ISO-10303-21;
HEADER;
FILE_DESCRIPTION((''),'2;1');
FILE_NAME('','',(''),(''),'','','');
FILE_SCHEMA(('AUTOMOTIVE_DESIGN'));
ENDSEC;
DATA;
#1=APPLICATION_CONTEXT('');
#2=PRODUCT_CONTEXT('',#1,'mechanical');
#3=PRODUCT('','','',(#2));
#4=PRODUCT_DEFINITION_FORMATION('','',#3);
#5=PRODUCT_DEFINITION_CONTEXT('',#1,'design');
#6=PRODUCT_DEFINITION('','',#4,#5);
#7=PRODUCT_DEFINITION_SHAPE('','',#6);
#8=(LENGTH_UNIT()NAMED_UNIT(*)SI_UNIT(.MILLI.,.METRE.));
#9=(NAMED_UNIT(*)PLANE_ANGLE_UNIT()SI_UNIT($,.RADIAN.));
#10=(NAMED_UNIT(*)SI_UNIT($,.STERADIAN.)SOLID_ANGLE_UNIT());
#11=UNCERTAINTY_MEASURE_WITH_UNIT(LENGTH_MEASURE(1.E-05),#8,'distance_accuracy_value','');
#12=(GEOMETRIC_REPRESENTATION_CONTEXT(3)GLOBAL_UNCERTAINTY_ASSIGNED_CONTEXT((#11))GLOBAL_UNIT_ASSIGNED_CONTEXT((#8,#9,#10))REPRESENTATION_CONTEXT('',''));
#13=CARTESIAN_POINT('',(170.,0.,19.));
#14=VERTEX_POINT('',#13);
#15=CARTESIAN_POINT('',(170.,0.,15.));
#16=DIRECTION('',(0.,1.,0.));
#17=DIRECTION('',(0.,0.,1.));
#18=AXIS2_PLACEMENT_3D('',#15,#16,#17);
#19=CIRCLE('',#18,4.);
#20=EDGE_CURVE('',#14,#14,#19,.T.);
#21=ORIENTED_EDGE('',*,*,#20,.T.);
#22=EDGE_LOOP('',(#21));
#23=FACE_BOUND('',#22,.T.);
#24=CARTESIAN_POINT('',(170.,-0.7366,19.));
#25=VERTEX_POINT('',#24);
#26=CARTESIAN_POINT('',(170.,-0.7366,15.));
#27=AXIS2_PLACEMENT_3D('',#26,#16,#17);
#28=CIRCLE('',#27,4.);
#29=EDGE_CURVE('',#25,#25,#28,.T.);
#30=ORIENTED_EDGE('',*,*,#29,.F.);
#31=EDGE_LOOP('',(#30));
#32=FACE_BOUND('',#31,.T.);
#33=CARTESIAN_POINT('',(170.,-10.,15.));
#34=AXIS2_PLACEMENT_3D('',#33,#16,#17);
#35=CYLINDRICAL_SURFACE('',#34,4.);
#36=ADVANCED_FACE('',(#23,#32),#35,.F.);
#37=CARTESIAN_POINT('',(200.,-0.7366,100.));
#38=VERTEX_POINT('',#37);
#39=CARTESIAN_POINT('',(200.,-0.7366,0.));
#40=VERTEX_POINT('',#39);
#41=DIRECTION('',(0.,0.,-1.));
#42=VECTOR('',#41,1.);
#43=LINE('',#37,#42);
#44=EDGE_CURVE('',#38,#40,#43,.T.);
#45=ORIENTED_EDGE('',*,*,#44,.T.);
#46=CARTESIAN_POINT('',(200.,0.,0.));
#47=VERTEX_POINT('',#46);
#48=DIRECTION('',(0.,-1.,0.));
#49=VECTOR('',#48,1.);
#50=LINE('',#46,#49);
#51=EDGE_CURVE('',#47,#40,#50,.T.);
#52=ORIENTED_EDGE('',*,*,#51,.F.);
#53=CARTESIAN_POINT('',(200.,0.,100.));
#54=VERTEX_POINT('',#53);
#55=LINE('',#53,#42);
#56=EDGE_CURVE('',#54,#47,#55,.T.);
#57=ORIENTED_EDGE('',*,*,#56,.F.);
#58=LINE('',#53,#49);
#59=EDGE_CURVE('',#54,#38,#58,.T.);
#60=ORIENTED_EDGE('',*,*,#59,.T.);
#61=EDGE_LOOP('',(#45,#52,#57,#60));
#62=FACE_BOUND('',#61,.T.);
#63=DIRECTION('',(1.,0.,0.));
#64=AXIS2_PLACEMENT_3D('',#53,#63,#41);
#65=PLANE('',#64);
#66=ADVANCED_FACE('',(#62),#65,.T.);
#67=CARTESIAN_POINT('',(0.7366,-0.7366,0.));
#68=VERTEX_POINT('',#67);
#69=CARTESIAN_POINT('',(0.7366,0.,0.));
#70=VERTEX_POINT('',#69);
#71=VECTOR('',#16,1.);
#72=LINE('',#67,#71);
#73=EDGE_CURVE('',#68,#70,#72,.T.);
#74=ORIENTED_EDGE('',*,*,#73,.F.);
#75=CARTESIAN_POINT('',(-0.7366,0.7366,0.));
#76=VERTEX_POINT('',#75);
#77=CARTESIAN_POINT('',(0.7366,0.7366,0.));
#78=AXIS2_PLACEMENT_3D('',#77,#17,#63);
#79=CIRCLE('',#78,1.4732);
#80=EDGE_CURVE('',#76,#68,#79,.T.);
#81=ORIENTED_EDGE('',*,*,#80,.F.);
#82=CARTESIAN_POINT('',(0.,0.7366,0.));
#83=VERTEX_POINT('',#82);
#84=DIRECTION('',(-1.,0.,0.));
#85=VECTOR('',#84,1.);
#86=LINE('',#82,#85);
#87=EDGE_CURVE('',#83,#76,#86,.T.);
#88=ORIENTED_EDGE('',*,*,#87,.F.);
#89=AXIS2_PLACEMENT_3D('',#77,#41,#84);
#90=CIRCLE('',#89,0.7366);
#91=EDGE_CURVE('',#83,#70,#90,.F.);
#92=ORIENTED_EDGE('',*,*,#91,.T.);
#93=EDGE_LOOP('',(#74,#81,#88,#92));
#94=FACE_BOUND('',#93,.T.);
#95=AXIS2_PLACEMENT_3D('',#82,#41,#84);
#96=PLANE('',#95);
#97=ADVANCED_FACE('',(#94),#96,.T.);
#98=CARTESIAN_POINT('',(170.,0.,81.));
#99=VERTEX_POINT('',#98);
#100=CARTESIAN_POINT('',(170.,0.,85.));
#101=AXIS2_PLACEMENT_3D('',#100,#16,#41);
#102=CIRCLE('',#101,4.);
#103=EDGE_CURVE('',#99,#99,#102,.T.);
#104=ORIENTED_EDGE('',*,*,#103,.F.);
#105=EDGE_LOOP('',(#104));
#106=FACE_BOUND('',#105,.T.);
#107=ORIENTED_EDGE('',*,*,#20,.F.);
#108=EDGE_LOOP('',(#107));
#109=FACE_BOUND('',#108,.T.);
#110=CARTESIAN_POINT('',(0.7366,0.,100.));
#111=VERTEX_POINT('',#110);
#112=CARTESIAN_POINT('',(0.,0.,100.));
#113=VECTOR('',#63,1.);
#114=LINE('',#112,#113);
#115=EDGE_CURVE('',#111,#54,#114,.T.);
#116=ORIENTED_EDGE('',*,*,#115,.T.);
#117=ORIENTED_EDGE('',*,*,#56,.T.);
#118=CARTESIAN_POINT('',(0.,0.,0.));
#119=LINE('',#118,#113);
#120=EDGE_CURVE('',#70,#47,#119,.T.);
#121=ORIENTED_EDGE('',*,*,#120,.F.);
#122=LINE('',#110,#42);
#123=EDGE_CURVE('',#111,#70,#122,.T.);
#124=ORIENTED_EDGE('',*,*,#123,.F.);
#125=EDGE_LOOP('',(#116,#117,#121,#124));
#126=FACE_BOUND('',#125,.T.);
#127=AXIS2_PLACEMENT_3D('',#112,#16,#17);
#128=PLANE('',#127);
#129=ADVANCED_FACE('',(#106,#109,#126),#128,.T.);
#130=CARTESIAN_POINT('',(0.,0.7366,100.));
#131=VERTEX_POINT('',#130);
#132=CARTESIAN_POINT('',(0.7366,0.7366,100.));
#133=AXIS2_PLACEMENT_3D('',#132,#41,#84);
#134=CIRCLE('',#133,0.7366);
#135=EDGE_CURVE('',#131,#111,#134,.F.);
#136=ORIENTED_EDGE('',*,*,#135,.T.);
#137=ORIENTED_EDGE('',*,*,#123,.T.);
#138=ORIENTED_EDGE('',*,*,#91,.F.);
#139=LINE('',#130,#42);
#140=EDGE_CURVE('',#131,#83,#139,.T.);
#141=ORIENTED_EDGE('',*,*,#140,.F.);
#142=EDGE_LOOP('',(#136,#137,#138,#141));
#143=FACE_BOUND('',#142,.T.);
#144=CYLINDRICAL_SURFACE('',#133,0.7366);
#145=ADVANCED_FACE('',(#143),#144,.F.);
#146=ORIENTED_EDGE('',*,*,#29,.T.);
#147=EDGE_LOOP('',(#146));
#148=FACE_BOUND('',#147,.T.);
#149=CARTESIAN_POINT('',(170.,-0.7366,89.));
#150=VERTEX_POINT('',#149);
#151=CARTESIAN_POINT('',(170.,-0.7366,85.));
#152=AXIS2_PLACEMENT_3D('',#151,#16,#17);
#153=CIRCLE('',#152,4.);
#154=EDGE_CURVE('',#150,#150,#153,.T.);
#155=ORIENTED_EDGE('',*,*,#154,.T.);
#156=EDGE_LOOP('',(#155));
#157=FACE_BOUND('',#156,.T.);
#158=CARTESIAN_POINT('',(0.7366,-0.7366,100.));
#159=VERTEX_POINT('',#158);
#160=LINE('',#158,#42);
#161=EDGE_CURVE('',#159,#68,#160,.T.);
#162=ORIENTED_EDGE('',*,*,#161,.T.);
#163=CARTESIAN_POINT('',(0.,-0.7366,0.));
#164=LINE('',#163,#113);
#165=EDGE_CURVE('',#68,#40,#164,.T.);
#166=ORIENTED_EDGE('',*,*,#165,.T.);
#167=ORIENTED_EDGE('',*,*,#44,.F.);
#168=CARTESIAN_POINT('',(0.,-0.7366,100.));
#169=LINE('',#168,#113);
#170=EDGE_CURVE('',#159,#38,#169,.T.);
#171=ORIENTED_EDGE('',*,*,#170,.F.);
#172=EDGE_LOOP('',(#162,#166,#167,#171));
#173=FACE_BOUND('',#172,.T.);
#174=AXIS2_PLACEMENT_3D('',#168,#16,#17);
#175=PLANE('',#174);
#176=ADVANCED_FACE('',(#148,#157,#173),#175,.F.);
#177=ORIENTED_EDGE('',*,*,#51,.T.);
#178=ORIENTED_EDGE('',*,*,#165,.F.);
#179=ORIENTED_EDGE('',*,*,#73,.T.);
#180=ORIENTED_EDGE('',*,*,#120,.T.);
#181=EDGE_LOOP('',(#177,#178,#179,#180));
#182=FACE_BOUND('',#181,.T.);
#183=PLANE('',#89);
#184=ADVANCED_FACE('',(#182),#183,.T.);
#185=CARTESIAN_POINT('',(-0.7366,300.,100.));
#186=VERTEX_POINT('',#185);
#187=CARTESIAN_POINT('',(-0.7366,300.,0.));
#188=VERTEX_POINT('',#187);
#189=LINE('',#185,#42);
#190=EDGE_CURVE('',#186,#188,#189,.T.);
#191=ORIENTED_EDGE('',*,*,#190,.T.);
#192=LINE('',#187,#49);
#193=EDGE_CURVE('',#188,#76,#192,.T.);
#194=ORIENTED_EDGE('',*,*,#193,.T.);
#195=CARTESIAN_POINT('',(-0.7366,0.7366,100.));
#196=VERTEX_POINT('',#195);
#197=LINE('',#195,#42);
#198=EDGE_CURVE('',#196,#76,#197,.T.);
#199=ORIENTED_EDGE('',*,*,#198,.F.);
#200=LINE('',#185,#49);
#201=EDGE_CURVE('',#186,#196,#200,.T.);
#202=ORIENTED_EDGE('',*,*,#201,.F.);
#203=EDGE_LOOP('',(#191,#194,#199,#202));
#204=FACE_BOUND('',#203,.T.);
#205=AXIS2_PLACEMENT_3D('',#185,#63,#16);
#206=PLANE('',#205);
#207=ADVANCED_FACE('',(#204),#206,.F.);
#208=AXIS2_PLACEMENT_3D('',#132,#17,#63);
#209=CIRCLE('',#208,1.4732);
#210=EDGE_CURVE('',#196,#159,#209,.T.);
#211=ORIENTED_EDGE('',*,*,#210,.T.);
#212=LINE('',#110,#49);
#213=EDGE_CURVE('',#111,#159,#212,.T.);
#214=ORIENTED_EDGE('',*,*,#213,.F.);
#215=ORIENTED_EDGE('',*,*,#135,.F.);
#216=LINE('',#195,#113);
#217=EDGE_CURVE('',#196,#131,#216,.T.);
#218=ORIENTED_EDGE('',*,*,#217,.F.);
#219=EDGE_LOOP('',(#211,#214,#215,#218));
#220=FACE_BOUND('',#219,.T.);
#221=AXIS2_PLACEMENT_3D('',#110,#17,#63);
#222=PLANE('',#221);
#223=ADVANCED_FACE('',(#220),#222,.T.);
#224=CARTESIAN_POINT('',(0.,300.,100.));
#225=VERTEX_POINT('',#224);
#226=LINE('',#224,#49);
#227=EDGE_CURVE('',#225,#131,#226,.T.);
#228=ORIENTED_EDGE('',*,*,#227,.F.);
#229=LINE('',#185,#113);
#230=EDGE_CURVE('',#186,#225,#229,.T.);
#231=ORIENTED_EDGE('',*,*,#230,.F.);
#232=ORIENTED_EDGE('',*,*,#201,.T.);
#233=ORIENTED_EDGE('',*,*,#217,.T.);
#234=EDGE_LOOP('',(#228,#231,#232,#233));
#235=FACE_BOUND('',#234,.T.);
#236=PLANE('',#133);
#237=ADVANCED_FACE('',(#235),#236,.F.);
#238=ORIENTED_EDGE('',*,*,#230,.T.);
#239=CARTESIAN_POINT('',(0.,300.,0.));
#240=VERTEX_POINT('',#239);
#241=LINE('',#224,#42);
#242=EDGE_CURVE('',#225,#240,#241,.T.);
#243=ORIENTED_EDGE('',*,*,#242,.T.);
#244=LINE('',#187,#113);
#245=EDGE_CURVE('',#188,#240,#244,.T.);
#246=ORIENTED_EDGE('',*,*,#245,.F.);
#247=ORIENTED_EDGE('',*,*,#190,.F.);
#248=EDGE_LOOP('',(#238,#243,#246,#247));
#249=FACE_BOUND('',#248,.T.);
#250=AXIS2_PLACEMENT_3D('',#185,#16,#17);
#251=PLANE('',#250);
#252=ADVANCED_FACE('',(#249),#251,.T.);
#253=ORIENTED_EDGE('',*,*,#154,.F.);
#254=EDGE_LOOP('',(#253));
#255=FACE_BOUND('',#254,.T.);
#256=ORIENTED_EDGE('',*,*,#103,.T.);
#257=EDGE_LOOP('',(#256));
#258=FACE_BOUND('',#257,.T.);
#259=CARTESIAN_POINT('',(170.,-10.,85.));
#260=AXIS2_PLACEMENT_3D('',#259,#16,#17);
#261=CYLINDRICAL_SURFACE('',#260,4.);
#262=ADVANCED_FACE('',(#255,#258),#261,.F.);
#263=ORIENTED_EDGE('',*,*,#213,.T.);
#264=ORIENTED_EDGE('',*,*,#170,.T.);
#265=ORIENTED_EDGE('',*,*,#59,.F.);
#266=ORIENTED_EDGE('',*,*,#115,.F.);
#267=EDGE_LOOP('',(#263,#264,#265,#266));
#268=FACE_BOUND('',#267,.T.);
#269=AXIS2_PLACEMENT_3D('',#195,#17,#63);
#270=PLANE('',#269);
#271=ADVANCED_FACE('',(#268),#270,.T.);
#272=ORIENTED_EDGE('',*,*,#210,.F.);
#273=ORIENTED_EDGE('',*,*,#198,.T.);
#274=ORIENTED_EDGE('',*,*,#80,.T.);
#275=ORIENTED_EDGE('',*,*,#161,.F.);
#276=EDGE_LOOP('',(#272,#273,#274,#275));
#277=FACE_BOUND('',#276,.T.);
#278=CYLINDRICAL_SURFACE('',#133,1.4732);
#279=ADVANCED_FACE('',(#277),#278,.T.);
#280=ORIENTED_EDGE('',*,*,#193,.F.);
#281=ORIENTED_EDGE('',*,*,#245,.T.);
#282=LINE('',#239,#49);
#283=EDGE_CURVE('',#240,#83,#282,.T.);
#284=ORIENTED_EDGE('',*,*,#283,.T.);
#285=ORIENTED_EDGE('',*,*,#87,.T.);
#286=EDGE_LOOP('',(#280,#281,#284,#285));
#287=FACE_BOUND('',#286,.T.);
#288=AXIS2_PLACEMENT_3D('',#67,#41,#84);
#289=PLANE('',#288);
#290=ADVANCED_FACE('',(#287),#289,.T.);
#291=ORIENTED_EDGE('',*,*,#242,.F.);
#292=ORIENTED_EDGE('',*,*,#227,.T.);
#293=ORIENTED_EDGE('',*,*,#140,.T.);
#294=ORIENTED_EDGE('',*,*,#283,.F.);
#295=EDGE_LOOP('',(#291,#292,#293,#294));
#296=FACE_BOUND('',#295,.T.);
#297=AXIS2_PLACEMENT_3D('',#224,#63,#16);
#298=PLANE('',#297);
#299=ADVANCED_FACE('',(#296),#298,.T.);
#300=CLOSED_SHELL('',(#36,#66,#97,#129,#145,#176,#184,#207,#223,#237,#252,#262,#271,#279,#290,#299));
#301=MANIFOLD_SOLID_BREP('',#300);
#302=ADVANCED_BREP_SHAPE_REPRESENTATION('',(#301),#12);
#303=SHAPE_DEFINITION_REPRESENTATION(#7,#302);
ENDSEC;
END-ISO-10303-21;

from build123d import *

# Parameters (mm, degrees)
BASE_FLANGE1_DEPTH = 100
SKETCH6_R          = 4
CUT_EXTRUDE1_DEPTH = 10


# Sheet-metal steps are written as plain solids
with BuildPart() as part:
    # Sketch1 → Base-Flange1 (new body)
    with BuildSketch(Plane.XY):
        with BuildLine():
            Line((0, 300), (0, 0.7366))
            ThreePointArc((0, 0.7366), (0.215745145, 0.215745145), (0.7366, 0))
            Line((0.7366, 0), (200, 0))
            Line((200, 0), (200, -0.7366))
            Line((200, -0.7366), (0.7366, -0.7366))
            ThreePointArc((0.7366, -0.7366), (-0.30510971, -0.30510971), (-0.7366, 0.7366))
            Line((-0.7366, 0.7366), (-0.7366, 300))
            Line((-0.7366, 300), (0, 300))
        make_face()
    extrude(amount=BASE_FLANGE1_DEPTH)

    # Sketch6 → Cut-Extrude1 (cut)
    with BuildSketch(Plane(origin=(0, 0, 0), x_dir=(1, 0, 0), z_dir=(0, 1, 0))):
        with Locations(Location((170, -15, 0), (0, 0, 270))):
            Circle(SKETCH6_R)
        with Locations(Location((170, -85, 0), (0, 0, 270))):
            Circle(SKETCH6_R)
    extrude(amount=-CUT_EXTRUDE1_DEPTH, mode=Mode.SUBTRACT)


solid = part.part
